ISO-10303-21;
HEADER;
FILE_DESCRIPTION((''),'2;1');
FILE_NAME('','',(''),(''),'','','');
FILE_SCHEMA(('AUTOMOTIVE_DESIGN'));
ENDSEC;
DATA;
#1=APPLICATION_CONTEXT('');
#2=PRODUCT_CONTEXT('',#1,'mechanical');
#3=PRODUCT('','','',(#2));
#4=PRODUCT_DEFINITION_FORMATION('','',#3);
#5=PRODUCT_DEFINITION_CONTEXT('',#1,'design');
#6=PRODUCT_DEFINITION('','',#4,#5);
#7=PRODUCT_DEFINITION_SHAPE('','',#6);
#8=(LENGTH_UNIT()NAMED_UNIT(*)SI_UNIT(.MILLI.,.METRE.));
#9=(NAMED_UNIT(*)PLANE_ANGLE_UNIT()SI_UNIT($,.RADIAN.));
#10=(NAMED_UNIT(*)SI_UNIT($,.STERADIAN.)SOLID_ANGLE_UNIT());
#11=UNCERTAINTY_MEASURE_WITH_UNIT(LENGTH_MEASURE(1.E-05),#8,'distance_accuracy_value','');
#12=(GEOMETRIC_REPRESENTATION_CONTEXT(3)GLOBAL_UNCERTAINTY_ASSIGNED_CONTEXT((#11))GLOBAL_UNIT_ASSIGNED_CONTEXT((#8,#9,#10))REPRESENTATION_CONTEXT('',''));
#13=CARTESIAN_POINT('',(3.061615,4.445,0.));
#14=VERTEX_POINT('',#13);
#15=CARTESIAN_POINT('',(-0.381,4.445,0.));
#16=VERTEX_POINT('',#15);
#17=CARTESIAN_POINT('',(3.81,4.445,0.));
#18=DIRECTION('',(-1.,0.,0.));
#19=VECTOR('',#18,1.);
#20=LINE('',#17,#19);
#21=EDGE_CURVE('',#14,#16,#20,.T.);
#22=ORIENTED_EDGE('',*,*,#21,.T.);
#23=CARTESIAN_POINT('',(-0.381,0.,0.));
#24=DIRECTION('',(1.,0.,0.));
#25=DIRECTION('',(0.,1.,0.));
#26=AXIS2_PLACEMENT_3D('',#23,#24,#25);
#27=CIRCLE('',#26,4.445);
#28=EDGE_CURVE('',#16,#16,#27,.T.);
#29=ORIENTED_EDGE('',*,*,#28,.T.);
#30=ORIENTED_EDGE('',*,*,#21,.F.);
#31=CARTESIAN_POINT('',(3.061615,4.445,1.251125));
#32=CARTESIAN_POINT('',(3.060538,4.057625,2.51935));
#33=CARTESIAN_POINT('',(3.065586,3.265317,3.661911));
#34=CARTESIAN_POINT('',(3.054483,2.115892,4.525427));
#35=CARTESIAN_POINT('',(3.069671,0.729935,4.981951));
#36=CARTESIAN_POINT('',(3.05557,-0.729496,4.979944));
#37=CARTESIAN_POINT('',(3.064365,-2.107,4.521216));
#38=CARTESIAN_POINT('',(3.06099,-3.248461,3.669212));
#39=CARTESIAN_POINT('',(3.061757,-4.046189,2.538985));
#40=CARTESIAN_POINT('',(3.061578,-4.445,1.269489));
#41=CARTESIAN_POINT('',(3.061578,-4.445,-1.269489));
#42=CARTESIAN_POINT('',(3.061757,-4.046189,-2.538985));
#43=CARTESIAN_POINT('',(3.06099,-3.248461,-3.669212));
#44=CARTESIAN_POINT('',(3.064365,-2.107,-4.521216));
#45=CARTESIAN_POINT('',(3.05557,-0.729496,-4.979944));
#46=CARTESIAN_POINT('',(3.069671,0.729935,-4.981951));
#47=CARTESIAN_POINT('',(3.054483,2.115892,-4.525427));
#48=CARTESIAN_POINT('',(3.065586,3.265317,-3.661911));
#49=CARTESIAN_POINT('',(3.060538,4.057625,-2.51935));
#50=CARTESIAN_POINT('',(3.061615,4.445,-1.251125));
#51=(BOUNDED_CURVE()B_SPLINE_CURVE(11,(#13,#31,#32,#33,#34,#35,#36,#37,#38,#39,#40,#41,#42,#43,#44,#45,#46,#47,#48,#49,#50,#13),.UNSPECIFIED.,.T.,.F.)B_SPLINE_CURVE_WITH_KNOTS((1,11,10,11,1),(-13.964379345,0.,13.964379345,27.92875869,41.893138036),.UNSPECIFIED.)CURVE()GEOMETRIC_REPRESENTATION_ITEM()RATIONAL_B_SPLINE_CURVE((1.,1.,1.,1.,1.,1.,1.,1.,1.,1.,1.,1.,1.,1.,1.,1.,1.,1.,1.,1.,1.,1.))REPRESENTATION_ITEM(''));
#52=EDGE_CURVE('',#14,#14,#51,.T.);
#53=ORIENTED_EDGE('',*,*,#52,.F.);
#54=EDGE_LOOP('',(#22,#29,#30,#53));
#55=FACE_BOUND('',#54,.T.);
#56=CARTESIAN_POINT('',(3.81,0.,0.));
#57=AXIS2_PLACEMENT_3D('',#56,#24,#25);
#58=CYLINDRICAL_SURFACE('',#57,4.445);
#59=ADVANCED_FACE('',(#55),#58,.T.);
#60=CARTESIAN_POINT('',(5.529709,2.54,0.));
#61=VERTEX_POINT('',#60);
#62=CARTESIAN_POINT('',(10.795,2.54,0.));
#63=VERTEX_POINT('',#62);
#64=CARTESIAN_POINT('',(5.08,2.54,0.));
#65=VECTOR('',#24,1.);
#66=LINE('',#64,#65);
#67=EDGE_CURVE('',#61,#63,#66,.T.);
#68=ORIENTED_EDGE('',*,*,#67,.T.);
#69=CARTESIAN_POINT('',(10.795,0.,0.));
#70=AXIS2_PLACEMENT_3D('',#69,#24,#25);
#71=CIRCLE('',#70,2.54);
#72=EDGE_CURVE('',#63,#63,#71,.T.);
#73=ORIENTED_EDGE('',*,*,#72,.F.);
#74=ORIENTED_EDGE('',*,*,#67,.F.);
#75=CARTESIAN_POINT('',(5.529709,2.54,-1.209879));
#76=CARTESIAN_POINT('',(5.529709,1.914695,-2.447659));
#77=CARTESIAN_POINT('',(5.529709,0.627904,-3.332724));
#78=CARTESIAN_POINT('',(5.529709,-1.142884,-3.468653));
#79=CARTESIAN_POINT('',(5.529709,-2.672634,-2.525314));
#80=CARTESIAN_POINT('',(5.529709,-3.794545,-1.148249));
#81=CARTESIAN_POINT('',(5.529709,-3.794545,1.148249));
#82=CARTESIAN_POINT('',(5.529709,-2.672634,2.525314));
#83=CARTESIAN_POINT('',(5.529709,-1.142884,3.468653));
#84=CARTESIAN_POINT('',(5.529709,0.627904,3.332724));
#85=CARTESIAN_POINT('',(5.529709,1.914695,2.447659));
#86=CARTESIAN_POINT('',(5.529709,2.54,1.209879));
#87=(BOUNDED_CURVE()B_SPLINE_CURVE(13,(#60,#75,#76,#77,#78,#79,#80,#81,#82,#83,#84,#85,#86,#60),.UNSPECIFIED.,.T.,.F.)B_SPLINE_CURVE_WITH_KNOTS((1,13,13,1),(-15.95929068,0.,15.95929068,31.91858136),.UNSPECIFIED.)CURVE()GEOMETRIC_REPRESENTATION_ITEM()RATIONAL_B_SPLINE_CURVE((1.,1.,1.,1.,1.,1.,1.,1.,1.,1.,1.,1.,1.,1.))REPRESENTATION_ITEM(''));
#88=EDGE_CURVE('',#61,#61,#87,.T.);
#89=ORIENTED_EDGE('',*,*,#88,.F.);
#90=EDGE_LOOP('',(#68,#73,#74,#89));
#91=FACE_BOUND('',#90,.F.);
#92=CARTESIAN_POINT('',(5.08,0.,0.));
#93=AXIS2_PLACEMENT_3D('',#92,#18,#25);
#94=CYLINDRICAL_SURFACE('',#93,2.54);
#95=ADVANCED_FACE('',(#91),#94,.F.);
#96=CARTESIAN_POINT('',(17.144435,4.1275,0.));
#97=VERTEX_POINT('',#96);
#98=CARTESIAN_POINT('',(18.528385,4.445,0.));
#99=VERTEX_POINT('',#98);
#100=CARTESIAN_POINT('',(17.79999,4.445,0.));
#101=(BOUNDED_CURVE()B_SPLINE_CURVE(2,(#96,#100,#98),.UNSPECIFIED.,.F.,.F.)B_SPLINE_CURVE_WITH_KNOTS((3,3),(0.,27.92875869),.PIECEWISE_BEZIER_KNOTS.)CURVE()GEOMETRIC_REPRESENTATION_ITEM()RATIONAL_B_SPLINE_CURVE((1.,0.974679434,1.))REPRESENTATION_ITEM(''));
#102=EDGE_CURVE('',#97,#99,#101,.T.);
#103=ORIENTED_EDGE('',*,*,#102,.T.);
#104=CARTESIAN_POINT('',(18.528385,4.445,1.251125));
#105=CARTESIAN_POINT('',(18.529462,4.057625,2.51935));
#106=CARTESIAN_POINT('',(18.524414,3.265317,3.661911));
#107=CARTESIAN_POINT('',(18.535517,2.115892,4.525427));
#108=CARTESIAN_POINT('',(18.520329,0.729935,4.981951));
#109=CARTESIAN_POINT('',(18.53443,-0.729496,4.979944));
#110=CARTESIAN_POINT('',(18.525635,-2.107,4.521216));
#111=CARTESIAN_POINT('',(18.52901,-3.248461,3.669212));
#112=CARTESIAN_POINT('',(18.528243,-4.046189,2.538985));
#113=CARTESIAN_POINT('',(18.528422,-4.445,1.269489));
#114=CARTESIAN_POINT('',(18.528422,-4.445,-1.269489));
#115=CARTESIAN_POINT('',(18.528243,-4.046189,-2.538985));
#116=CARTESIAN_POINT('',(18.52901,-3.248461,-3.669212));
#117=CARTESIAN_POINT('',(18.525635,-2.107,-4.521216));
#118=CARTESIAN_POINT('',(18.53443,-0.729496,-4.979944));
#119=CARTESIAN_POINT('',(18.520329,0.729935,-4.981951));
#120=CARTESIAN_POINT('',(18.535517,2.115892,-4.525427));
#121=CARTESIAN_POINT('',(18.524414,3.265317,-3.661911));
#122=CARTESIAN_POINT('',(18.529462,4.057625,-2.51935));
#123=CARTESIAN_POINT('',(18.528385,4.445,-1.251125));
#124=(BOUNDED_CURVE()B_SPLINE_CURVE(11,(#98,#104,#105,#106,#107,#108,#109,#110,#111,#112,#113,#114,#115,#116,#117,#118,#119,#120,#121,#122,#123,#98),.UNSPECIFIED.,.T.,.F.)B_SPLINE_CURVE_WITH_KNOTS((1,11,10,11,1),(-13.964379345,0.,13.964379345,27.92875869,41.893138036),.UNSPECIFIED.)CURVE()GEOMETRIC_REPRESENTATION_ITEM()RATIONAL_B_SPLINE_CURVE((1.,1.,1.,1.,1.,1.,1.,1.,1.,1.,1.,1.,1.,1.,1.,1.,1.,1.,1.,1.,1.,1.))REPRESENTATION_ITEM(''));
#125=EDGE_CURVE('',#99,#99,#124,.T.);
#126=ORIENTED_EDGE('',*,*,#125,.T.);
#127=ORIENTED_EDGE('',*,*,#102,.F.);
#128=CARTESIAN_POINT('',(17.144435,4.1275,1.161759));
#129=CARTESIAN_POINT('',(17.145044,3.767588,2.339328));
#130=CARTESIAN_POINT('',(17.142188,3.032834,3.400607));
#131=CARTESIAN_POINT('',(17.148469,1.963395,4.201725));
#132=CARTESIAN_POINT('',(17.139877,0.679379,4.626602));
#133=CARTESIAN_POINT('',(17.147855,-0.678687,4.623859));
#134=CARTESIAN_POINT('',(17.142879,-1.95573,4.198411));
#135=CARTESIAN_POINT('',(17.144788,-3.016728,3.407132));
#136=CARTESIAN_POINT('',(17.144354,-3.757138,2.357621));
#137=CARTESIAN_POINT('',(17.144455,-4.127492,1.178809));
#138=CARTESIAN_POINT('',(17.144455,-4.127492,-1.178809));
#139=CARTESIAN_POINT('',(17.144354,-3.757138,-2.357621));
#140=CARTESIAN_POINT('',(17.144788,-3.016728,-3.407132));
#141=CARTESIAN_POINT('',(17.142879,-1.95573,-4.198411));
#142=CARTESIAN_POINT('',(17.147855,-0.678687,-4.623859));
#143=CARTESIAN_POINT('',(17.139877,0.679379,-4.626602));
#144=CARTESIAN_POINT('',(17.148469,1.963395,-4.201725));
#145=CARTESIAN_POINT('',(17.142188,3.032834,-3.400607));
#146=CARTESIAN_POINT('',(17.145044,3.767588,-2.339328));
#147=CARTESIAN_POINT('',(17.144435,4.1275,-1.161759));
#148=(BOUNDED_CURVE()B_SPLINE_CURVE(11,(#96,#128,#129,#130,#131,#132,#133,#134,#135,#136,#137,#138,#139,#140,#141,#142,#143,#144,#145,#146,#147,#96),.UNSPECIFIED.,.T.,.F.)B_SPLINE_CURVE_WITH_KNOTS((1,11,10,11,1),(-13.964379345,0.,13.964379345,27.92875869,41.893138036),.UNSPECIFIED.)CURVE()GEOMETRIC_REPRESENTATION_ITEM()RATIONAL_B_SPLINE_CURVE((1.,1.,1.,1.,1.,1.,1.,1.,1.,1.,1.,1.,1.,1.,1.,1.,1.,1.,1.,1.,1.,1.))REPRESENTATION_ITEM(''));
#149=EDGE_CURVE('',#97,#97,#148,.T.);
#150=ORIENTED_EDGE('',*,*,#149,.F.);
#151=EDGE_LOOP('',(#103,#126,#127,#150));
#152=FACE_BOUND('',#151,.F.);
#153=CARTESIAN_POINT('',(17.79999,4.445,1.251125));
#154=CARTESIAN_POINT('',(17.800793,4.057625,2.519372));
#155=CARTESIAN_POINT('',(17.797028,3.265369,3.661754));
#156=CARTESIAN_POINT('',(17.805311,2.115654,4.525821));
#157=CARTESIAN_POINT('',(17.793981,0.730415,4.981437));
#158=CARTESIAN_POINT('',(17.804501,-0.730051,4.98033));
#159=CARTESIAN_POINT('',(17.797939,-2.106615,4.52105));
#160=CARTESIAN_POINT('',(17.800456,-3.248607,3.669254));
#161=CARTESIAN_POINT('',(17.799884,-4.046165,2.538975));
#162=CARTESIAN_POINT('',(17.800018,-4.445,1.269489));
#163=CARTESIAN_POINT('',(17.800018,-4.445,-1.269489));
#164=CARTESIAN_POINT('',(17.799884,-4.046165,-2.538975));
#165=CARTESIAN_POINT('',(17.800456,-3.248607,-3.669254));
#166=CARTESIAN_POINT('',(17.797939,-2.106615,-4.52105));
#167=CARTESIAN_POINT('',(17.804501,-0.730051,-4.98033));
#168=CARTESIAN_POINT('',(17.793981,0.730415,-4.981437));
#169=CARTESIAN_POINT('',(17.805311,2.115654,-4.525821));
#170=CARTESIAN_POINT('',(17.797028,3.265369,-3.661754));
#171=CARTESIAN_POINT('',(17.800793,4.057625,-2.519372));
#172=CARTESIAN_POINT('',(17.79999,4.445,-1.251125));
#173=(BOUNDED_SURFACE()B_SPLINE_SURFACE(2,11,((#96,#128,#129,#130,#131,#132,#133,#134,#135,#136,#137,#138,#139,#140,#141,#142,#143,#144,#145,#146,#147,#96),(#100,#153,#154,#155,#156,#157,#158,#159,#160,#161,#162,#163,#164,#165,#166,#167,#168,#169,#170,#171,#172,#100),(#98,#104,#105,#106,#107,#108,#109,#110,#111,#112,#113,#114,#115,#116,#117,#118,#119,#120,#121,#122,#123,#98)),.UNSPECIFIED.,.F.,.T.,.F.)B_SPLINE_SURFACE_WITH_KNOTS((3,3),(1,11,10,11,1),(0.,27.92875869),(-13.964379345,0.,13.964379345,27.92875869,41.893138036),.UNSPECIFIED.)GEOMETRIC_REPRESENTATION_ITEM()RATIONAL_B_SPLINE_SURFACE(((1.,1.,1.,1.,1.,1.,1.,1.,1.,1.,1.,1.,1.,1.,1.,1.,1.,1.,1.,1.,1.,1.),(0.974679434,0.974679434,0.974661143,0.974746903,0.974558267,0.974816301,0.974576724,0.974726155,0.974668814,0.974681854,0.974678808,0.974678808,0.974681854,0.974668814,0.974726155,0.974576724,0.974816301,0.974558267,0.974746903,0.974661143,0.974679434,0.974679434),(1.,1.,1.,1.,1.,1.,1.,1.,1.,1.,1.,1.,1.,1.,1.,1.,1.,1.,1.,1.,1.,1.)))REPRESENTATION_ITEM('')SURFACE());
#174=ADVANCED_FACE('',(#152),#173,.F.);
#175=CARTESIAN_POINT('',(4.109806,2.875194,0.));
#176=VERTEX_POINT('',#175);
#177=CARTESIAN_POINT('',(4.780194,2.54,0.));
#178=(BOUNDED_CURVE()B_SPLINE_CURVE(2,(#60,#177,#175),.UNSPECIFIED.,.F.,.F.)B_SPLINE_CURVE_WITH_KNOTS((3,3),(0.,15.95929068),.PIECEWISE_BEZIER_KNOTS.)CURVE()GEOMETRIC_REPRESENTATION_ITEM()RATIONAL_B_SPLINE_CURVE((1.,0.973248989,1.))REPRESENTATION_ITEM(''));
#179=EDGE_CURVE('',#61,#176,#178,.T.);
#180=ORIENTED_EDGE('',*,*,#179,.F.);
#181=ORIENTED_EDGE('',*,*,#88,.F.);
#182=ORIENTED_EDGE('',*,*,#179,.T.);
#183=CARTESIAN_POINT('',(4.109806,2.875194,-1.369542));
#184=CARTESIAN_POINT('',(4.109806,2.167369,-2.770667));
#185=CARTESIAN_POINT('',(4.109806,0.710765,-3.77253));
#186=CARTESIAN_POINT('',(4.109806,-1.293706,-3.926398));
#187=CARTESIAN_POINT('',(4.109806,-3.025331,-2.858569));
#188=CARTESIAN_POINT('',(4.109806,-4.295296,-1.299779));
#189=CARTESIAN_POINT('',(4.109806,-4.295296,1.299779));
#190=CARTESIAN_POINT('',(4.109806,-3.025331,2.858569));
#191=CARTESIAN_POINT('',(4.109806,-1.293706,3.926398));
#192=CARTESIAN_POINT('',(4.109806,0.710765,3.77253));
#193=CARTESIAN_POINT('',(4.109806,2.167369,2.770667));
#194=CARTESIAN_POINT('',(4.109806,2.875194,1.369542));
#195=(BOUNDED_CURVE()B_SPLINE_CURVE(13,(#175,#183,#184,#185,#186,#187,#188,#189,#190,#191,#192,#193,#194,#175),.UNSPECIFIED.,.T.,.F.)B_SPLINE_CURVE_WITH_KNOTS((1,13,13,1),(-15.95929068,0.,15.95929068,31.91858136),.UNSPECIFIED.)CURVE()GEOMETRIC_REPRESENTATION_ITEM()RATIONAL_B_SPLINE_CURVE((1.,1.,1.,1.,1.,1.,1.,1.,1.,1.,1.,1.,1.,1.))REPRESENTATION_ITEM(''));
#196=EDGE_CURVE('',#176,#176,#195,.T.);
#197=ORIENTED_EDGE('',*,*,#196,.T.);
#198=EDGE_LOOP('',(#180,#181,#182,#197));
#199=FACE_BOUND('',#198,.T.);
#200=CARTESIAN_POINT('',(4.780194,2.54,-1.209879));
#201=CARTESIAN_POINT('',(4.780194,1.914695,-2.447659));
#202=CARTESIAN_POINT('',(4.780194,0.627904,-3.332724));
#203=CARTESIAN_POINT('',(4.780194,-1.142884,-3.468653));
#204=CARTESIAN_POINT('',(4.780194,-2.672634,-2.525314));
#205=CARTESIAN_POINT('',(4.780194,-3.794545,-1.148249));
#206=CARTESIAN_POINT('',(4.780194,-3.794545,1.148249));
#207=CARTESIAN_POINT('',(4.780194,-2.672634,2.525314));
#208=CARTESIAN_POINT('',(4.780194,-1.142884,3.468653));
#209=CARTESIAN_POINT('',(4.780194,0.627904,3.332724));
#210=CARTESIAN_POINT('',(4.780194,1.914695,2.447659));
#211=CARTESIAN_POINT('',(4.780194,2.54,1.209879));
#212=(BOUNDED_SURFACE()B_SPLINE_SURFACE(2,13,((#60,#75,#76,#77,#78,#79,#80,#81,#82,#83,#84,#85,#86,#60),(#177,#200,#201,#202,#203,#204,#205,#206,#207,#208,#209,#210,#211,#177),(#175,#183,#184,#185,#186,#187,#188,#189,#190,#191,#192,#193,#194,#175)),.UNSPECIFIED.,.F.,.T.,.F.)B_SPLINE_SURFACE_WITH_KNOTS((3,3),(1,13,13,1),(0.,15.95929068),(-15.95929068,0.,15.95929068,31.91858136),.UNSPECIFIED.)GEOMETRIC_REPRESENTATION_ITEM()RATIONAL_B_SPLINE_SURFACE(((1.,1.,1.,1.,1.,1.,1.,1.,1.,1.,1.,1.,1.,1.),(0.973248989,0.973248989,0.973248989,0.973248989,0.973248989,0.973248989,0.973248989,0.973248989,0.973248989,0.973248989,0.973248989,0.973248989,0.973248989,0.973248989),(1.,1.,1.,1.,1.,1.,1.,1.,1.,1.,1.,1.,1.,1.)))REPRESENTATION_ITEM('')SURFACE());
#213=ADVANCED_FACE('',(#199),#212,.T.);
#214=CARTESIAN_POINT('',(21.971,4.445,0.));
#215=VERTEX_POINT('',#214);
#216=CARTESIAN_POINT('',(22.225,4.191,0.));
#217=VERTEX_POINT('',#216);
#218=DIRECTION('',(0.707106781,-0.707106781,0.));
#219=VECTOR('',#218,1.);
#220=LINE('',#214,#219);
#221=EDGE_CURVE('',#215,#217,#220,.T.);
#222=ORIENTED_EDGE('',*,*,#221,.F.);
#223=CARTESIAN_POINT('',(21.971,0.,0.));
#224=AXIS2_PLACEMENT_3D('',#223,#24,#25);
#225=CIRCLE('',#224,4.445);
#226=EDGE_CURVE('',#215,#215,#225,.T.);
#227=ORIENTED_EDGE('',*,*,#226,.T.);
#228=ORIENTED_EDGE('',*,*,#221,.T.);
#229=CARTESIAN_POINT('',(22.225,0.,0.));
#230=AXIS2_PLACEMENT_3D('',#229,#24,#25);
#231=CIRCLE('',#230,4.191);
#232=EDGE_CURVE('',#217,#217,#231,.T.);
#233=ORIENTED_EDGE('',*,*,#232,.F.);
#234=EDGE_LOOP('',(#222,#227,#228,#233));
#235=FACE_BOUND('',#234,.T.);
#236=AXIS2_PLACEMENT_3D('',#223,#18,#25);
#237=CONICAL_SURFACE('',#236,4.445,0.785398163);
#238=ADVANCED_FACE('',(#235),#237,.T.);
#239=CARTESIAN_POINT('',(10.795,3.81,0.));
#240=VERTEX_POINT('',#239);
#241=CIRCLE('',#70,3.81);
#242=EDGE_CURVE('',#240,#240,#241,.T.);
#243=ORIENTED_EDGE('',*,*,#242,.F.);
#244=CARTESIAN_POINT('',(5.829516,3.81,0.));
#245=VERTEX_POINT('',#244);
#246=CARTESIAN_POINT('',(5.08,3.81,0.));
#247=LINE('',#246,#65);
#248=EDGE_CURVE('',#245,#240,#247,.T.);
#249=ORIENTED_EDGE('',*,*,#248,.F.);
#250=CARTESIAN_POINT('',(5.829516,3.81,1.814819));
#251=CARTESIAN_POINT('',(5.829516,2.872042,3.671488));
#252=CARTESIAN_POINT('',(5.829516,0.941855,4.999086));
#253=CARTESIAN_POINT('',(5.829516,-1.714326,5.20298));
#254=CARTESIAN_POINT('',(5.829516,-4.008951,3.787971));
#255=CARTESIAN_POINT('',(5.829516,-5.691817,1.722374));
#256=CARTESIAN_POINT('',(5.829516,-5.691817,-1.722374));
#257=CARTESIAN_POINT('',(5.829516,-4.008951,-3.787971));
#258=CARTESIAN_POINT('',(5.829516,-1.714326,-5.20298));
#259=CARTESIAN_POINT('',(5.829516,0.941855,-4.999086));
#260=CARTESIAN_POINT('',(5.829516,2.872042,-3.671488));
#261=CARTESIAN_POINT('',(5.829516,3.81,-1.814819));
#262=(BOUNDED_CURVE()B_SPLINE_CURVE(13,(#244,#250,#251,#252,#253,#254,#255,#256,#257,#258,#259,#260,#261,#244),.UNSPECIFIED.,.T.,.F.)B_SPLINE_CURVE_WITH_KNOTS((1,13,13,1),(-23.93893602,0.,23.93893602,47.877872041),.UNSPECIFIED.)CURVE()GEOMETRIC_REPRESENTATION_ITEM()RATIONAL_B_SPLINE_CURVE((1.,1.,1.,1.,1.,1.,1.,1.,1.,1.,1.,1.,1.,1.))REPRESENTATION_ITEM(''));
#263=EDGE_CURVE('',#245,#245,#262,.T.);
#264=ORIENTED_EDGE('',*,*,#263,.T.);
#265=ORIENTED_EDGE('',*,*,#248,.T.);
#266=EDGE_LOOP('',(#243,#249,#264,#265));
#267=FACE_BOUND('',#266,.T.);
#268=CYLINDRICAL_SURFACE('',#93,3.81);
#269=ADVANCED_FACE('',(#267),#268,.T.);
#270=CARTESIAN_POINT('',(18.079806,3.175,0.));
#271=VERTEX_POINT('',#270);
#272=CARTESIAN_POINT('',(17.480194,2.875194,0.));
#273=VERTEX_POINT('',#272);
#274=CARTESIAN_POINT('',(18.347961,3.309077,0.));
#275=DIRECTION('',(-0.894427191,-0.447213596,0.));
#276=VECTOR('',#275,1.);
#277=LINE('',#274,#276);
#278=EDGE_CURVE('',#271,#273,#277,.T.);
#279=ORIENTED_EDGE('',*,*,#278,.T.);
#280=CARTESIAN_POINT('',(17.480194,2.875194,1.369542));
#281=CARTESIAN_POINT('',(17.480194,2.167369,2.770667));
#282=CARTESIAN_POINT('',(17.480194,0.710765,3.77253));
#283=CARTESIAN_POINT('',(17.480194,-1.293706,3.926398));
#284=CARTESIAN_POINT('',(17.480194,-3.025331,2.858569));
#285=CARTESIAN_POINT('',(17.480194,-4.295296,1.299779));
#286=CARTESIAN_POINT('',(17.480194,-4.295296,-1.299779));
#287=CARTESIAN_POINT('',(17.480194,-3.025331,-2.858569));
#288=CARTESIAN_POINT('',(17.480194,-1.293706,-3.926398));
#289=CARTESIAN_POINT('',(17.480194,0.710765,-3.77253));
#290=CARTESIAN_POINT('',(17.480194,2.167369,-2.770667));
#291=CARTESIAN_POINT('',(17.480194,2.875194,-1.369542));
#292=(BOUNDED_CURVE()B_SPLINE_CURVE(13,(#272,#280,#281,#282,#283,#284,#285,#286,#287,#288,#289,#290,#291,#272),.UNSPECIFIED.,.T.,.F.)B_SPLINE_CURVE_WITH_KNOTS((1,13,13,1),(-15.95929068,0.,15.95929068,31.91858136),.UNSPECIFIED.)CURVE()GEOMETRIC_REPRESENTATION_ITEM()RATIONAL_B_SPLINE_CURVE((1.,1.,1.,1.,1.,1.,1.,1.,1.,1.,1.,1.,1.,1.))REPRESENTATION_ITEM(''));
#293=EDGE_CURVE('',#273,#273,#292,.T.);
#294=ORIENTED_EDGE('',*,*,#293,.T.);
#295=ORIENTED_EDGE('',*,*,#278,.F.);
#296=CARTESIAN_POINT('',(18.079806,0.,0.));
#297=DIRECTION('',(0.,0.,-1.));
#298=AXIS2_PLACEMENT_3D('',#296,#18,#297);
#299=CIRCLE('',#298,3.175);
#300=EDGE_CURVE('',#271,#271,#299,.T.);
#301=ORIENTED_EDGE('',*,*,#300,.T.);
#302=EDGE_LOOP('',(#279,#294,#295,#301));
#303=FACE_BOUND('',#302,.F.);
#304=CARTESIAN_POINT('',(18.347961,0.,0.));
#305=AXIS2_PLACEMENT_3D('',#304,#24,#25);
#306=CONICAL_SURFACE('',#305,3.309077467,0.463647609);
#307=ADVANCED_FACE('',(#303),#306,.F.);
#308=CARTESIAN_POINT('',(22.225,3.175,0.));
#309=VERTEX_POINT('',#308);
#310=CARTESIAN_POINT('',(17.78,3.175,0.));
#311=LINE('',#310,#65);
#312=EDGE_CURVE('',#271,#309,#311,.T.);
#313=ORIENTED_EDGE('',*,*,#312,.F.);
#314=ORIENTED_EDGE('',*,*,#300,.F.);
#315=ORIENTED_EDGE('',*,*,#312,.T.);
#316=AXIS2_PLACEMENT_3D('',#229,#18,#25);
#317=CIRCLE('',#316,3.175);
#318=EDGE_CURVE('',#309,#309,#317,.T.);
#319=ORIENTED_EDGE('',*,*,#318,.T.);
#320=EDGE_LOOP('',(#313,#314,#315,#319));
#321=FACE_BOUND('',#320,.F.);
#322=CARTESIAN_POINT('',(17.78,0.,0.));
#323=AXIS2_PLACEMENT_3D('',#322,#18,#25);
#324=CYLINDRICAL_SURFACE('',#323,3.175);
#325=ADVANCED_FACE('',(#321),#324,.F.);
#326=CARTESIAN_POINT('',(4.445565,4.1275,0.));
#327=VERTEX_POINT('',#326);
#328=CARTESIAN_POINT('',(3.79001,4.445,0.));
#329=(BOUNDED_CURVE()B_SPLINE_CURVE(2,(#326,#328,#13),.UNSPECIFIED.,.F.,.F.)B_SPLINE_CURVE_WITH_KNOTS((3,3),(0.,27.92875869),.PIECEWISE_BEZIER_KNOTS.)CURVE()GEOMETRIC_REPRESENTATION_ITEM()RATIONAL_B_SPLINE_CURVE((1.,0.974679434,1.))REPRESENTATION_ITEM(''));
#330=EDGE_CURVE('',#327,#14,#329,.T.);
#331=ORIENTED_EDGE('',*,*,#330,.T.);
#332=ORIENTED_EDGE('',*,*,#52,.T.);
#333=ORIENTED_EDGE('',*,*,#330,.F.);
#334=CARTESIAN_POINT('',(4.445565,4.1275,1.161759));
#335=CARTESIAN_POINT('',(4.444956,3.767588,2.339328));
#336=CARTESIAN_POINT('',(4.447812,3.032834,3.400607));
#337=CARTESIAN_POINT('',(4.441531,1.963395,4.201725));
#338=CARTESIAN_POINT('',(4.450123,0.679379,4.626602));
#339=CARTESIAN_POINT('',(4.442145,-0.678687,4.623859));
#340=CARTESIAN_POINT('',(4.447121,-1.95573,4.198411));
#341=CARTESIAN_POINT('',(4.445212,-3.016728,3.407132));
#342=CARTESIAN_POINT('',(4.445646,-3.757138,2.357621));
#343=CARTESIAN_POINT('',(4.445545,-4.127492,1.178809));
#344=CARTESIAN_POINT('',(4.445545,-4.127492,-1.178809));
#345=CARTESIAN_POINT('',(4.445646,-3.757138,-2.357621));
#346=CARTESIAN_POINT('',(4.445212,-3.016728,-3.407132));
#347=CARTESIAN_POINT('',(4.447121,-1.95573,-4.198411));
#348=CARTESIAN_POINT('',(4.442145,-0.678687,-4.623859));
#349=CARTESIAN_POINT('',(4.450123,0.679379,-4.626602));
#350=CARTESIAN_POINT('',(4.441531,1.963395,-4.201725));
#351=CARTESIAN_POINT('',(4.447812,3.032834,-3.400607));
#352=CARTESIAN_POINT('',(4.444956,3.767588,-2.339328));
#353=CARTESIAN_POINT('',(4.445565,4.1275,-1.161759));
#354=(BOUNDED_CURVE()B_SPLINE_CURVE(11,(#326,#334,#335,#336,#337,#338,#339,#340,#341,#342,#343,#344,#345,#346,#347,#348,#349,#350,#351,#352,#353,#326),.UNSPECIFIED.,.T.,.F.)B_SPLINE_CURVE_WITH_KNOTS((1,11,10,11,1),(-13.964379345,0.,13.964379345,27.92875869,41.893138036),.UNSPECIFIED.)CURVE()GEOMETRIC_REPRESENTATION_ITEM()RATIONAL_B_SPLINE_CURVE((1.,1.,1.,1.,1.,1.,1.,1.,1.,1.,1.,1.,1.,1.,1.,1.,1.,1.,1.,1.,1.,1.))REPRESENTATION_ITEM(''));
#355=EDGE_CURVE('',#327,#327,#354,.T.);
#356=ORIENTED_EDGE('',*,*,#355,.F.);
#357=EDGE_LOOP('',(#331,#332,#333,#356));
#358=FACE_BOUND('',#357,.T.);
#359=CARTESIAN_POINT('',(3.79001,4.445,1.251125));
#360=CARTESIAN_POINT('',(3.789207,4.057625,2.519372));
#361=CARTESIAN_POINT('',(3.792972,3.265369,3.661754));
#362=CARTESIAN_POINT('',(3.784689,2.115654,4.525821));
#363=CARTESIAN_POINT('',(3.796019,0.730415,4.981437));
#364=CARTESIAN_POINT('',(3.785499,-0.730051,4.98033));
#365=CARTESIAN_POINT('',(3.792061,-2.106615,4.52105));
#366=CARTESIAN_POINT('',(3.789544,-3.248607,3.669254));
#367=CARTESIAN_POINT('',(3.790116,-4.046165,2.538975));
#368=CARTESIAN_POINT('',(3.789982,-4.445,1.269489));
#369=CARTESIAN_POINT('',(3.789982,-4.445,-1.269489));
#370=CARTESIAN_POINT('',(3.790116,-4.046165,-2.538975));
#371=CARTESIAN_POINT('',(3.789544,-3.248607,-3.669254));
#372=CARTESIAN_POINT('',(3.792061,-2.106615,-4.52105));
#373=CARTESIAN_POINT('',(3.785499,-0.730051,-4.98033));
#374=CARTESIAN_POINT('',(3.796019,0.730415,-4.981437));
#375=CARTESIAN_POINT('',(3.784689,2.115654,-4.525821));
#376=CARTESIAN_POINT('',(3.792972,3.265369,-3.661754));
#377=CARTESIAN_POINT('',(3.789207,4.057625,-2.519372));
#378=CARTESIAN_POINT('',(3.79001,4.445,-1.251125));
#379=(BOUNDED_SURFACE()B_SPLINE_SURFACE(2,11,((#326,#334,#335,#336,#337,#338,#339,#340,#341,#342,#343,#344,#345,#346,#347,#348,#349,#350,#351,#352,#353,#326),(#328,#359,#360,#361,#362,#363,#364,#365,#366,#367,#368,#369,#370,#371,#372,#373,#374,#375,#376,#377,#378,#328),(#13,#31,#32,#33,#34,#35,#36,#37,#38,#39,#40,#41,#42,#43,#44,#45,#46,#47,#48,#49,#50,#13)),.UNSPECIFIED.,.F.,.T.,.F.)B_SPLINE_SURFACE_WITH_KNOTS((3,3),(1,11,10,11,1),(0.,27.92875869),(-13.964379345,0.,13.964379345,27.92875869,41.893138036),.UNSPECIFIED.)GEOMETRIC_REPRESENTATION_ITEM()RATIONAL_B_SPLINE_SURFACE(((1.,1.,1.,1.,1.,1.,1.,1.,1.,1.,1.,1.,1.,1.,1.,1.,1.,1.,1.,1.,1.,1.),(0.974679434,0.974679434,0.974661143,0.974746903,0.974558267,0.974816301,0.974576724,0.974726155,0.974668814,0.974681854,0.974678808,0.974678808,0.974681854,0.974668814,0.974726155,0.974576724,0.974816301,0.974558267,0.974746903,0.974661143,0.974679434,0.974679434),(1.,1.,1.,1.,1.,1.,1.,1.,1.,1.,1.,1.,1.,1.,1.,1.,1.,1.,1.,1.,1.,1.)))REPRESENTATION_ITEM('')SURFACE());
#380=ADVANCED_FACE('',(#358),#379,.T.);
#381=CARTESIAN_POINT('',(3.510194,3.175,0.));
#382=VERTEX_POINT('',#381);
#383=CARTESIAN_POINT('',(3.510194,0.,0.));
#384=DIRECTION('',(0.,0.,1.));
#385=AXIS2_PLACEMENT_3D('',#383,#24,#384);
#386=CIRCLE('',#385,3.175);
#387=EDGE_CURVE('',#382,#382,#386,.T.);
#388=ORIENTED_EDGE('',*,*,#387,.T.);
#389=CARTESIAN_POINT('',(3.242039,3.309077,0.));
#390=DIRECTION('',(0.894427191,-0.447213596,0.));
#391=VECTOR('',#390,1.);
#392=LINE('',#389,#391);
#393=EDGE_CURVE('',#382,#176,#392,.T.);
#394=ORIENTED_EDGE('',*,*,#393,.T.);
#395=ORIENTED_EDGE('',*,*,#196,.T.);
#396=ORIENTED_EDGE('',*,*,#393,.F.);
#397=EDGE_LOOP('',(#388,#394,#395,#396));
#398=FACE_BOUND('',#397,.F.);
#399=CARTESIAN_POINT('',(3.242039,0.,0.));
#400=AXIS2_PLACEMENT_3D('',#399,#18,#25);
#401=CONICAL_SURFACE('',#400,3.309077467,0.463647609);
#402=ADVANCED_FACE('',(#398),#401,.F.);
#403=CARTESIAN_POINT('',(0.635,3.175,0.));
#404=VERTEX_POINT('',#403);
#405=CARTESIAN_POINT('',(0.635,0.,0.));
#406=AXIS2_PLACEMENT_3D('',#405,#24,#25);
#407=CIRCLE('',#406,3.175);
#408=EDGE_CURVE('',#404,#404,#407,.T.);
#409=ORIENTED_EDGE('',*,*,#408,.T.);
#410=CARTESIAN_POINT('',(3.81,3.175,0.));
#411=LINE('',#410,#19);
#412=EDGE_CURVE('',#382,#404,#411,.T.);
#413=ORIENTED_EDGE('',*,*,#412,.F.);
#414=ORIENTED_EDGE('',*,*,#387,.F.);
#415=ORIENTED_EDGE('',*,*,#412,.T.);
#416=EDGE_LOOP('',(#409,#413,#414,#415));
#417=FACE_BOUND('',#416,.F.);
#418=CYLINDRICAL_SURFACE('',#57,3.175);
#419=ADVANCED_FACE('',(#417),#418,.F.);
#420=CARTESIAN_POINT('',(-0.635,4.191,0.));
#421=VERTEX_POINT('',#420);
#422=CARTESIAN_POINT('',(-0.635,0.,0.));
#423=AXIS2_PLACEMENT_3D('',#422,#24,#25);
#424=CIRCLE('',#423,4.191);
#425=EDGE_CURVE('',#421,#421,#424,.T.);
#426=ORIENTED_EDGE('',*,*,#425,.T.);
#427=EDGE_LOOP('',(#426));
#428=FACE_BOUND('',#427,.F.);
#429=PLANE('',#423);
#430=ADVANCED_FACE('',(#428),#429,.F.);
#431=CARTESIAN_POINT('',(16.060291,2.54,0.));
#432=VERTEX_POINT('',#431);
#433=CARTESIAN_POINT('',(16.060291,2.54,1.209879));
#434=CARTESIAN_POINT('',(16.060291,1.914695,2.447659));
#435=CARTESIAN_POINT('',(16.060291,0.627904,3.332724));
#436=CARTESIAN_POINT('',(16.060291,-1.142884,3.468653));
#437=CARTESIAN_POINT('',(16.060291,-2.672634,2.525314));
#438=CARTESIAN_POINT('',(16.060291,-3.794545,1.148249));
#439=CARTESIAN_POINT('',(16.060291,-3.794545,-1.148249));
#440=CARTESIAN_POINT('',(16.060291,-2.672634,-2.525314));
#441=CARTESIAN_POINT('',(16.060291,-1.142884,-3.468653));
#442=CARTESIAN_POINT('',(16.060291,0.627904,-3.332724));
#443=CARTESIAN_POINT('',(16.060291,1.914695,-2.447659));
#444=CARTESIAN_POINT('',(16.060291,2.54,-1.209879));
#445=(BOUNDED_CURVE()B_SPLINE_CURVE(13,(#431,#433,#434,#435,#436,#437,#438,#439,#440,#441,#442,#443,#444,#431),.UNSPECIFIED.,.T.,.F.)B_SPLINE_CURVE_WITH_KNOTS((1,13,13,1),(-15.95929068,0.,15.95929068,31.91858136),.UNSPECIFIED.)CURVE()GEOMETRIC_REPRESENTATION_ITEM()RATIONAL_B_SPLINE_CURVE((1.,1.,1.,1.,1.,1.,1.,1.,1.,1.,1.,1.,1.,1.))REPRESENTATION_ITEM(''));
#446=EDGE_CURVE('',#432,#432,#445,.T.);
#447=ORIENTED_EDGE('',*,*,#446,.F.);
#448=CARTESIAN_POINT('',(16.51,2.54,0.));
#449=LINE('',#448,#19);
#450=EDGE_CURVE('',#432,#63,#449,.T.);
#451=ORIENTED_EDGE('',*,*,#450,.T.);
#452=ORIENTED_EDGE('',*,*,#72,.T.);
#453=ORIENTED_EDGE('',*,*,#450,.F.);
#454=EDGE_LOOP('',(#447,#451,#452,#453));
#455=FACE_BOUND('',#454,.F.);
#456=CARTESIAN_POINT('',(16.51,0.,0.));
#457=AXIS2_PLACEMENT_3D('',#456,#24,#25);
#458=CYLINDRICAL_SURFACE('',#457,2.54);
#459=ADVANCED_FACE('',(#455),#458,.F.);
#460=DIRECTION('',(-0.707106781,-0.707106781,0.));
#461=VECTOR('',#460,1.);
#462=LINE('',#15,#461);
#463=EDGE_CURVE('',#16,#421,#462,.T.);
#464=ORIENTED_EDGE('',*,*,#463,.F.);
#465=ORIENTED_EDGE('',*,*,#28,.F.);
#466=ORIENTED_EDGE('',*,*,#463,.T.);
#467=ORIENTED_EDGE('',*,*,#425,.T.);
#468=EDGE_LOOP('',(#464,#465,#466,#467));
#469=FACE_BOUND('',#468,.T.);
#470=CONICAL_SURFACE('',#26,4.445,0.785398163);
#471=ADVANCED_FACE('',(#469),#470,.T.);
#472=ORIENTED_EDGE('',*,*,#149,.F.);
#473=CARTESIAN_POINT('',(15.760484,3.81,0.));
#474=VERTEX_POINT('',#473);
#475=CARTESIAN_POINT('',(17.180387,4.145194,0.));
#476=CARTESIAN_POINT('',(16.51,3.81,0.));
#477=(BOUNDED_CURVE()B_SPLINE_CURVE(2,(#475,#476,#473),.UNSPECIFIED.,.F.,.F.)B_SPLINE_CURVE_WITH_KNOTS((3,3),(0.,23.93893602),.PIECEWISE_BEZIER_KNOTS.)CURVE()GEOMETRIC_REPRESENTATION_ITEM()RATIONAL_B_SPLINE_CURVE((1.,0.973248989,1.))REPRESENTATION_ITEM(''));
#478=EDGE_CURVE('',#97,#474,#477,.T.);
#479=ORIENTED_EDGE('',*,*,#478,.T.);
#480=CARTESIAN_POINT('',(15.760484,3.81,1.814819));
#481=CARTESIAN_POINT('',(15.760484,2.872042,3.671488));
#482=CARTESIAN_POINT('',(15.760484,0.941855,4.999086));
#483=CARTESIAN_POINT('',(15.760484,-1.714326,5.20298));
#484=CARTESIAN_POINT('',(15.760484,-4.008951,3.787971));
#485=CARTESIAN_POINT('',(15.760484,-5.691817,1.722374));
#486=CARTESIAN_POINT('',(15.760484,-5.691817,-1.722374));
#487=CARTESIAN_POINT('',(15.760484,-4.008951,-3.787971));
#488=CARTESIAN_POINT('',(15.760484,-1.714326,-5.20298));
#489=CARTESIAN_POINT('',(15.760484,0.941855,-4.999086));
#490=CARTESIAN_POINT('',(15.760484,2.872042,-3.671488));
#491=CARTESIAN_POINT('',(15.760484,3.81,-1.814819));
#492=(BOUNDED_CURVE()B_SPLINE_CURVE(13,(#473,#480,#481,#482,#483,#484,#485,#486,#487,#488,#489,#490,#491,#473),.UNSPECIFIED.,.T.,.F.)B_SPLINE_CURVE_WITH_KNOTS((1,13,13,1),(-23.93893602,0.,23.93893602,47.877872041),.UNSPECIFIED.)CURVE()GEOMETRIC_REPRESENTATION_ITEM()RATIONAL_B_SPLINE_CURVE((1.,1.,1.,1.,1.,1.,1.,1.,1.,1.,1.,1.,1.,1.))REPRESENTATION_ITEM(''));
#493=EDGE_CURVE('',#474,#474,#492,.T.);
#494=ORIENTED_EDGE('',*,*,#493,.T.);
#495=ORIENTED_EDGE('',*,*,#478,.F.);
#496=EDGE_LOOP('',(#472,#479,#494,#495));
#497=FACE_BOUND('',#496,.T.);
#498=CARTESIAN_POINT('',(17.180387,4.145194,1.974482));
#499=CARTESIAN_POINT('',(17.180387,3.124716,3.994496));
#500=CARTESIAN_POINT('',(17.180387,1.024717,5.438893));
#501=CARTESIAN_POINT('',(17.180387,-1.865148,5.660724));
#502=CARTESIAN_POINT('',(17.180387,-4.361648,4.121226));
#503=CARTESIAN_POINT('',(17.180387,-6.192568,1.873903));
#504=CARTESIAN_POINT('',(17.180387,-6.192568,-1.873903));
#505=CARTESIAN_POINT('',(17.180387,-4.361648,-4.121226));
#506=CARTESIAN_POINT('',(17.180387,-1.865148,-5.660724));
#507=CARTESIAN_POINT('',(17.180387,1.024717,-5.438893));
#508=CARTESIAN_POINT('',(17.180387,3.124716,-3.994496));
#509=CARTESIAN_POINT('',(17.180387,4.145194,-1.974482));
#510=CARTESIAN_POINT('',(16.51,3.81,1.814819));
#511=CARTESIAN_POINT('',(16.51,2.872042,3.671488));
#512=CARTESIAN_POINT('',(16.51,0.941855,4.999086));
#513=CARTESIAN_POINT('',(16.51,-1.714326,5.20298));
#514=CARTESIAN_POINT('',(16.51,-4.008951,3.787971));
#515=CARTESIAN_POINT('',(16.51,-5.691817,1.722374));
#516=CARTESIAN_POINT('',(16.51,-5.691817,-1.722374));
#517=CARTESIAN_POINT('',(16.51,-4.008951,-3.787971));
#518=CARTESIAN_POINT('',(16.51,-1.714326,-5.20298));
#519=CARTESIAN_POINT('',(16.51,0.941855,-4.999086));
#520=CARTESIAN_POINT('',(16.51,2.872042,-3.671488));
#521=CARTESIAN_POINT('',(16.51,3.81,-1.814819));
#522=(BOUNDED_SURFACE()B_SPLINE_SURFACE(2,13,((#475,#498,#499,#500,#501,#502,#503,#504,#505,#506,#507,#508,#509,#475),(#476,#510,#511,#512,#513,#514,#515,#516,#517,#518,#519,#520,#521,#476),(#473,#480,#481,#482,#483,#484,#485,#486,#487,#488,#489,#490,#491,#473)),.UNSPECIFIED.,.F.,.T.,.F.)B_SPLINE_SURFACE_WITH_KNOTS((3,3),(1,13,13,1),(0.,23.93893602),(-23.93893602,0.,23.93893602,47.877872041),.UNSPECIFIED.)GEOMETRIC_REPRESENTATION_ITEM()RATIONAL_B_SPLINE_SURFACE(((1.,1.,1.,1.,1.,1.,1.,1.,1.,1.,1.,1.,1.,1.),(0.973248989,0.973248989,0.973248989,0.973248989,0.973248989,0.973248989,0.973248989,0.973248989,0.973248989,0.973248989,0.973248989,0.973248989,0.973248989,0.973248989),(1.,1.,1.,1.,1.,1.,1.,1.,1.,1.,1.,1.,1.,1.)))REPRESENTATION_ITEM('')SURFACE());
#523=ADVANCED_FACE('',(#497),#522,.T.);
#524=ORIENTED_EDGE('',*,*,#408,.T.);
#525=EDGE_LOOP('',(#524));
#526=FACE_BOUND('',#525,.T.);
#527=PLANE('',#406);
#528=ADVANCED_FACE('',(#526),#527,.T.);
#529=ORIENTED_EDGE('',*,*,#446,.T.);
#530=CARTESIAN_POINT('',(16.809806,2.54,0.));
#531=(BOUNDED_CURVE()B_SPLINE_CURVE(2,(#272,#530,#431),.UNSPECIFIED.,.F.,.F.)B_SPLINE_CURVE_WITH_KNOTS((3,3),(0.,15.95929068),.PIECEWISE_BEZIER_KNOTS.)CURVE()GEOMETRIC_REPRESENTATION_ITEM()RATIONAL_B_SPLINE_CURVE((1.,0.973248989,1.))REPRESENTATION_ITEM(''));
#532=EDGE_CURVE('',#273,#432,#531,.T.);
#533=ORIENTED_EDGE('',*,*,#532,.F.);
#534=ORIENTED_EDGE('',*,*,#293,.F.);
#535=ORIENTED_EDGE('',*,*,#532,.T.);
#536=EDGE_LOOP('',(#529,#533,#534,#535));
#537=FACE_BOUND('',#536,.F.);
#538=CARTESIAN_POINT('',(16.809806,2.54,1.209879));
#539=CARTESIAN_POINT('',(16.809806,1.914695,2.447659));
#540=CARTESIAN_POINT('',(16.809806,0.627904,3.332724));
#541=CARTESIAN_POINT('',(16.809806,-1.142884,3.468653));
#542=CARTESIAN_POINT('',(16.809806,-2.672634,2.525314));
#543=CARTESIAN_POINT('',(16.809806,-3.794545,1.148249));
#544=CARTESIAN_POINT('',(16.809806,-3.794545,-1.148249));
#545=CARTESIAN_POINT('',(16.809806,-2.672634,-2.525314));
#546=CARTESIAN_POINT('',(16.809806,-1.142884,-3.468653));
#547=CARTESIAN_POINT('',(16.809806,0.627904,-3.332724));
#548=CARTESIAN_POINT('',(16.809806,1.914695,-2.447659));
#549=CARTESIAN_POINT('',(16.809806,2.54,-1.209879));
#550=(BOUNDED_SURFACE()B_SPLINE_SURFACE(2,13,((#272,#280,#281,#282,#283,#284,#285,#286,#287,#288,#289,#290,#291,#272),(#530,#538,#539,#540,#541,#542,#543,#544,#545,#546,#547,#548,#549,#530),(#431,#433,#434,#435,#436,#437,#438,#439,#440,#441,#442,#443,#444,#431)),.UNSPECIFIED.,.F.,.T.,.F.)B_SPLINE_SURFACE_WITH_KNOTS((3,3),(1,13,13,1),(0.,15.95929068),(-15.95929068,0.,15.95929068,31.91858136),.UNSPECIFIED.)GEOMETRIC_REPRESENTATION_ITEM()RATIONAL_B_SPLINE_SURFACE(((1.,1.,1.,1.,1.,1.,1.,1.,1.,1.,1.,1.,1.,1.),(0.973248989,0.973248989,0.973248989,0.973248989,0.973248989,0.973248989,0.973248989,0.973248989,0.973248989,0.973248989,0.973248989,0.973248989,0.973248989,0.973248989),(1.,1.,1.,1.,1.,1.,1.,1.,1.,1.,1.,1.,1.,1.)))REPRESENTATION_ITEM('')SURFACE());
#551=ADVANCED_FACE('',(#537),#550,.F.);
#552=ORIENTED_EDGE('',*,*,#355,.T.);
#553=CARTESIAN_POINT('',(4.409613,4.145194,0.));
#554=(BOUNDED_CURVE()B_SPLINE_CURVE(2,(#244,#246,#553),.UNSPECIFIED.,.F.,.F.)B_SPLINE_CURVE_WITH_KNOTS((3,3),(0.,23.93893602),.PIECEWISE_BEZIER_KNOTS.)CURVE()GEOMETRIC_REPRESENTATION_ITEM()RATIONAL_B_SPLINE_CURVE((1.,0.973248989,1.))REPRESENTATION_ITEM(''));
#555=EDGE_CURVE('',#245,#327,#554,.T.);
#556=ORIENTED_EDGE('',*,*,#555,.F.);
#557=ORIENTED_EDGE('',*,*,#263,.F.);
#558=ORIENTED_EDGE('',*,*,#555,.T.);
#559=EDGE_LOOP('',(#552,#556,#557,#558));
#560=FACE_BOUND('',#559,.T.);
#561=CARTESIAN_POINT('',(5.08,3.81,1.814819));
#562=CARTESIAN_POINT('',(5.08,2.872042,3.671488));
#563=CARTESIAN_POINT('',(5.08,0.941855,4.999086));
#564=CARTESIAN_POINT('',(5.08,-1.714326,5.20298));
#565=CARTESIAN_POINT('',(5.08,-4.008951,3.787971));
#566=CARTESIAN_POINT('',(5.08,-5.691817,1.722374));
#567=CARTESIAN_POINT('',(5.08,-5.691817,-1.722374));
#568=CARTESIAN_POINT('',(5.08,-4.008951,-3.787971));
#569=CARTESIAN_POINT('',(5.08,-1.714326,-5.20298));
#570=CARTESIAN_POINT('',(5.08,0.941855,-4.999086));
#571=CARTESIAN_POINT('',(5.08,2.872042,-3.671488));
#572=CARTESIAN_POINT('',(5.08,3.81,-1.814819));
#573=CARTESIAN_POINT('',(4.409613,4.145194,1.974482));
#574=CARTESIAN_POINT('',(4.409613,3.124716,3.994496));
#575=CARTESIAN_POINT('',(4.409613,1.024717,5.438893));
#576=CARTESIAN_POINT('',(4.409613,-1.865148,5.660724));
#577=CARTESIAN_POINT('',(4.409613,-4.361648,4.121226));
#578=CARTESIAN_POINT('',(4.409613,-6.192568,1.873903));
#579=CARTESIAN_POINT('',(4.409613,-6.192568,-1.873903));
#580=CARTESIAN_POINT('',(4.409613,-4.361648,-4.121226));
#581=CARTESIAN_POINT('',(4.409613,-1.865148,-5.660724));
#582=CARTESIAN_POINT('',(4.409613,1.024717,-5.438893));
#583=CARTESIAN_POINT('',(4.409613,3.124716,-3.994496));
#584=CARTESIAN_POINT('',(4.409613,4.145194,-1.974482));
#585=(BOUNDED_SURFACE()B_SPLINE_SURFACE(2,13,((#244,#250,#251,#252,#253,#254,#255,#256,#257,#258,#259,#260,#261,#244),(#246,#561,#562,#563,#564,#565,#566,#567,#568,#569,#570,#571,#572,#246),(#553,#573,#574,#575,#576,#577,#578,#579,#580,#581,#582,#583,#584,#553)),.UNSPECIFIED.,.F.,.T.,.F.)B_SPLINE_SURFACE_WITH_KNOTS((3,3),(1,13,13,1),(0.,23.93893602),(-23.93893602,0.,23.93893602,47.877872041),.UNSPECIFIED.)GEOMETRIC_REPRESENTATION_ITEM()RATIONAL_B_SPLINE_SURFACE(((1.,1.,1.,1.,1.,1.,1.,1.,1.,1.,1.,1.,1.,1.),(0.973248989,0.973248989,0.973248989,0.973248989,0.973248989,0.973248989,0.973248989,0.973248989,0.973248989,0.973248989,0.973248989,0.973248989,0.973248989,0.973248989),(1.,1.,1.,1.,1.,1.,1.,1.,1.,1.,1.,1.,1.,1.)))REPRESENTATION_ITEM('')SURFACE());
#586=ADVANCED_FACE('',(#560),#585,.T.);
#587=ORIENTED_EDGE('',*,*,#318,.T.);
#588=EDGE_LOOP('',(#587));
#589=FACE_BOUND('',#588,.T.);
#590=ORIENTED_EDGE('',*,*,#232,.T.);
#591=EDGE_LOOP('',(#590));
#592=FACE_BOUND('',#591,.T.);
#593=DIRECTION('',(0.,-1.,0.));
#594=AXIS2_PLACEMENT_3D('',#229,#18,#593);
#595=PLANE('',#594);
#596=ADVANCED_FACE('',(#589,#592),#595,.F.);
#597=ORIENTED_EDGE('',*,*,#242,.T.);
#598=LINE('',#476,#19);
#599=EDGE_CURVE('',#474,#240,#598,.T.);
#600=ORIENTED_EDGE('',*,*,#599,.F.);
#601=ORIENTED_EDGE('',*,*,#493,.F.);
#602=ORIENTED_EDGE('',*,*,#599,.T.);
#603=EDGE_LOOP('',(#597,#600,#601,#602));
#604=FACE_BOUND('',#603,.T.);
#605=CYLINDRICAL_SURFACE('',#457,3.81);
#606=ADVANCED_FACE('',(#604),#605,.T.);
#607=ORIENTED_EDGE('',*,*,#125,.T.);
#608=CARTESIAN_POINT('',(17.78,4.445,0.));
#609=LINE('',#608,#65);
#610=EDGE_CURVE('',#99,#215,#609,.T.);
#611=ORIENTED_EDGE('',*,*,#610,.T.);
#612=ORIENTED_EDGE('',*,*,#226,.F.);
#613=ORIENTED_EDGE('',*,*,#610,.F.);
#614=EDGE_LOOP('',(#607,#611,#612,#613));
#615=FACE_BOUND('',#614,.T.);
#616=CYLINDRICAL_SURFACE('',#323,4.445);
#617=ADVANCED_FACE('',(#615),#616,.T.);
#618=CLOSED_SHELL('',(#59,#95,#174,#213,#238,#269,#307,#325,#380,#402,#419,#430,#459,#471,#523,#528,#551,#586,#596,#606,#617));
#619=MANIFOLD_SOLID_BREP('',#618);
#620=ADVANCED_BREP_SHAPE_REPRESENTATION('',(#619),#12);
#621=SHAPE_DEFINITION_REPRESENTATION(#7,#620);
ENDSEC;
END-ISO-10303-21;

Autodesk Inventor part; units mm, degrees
ref_plane "XZ Plane" through (0, 0, 0) normal (0, 1, 0) x (-1, 0, 0)
ref_plane "Work Plane1" through (5.08, 0, 0) normal (1, 0, 0) x (0, 1, 0)
sketch "Sketch2" plane through (5.08, 0, 0) normal (1, 0, 0) x (0, 1, 0)
  circle A0 centre (0, 0) radius 3.81
  dimension "d2" = 7.62
extrude "Extrusion1" add sketch "Sketch2" along normal blind 5.715
ref_plane "Work Plane2" through (3.81, 0, 0) normal (1, 0, 0) x (0, 1, 0)
sketch "Sketch3" plane through (3.81, 0, 0) normal (1, 0, 0) x (0, 1, 0)
  circle A0 centre (0, 0) radius 4.445
  dimension "d6" = 8.89
loft "Loft1" add profiles "Sketch3" section 2 edges at (5.08, -3.81, 0)
extrude "Extrusion2" add sketch "Sketch3" against normal blind 4.445
mirror "Mirror1" about plane through (10.795, 0, 0) normal (1, 0, 0) of "Extrusion1", "Loft1", "Extrusion2"
shell "Shell1" thickness 1.27 removed faces 1 at (22.225, 1.6691, 0.6886)
fillet "Fillet1" radius 3.175 6 edges at (3.81, -4.445, 0) (5.08, -3.81, 0) (16.51, -3.81, 0) (17.78, -4.445, 0) (4.7802, -2.54, 0) (16.8098, -2.54, 0)
chamfer "Chamfer1" distance 0.254 angle 45 2 edges at (-0.635, -4.445, 0) (22.225, -4.445, 0)
properties part number "Axle-Connector"
